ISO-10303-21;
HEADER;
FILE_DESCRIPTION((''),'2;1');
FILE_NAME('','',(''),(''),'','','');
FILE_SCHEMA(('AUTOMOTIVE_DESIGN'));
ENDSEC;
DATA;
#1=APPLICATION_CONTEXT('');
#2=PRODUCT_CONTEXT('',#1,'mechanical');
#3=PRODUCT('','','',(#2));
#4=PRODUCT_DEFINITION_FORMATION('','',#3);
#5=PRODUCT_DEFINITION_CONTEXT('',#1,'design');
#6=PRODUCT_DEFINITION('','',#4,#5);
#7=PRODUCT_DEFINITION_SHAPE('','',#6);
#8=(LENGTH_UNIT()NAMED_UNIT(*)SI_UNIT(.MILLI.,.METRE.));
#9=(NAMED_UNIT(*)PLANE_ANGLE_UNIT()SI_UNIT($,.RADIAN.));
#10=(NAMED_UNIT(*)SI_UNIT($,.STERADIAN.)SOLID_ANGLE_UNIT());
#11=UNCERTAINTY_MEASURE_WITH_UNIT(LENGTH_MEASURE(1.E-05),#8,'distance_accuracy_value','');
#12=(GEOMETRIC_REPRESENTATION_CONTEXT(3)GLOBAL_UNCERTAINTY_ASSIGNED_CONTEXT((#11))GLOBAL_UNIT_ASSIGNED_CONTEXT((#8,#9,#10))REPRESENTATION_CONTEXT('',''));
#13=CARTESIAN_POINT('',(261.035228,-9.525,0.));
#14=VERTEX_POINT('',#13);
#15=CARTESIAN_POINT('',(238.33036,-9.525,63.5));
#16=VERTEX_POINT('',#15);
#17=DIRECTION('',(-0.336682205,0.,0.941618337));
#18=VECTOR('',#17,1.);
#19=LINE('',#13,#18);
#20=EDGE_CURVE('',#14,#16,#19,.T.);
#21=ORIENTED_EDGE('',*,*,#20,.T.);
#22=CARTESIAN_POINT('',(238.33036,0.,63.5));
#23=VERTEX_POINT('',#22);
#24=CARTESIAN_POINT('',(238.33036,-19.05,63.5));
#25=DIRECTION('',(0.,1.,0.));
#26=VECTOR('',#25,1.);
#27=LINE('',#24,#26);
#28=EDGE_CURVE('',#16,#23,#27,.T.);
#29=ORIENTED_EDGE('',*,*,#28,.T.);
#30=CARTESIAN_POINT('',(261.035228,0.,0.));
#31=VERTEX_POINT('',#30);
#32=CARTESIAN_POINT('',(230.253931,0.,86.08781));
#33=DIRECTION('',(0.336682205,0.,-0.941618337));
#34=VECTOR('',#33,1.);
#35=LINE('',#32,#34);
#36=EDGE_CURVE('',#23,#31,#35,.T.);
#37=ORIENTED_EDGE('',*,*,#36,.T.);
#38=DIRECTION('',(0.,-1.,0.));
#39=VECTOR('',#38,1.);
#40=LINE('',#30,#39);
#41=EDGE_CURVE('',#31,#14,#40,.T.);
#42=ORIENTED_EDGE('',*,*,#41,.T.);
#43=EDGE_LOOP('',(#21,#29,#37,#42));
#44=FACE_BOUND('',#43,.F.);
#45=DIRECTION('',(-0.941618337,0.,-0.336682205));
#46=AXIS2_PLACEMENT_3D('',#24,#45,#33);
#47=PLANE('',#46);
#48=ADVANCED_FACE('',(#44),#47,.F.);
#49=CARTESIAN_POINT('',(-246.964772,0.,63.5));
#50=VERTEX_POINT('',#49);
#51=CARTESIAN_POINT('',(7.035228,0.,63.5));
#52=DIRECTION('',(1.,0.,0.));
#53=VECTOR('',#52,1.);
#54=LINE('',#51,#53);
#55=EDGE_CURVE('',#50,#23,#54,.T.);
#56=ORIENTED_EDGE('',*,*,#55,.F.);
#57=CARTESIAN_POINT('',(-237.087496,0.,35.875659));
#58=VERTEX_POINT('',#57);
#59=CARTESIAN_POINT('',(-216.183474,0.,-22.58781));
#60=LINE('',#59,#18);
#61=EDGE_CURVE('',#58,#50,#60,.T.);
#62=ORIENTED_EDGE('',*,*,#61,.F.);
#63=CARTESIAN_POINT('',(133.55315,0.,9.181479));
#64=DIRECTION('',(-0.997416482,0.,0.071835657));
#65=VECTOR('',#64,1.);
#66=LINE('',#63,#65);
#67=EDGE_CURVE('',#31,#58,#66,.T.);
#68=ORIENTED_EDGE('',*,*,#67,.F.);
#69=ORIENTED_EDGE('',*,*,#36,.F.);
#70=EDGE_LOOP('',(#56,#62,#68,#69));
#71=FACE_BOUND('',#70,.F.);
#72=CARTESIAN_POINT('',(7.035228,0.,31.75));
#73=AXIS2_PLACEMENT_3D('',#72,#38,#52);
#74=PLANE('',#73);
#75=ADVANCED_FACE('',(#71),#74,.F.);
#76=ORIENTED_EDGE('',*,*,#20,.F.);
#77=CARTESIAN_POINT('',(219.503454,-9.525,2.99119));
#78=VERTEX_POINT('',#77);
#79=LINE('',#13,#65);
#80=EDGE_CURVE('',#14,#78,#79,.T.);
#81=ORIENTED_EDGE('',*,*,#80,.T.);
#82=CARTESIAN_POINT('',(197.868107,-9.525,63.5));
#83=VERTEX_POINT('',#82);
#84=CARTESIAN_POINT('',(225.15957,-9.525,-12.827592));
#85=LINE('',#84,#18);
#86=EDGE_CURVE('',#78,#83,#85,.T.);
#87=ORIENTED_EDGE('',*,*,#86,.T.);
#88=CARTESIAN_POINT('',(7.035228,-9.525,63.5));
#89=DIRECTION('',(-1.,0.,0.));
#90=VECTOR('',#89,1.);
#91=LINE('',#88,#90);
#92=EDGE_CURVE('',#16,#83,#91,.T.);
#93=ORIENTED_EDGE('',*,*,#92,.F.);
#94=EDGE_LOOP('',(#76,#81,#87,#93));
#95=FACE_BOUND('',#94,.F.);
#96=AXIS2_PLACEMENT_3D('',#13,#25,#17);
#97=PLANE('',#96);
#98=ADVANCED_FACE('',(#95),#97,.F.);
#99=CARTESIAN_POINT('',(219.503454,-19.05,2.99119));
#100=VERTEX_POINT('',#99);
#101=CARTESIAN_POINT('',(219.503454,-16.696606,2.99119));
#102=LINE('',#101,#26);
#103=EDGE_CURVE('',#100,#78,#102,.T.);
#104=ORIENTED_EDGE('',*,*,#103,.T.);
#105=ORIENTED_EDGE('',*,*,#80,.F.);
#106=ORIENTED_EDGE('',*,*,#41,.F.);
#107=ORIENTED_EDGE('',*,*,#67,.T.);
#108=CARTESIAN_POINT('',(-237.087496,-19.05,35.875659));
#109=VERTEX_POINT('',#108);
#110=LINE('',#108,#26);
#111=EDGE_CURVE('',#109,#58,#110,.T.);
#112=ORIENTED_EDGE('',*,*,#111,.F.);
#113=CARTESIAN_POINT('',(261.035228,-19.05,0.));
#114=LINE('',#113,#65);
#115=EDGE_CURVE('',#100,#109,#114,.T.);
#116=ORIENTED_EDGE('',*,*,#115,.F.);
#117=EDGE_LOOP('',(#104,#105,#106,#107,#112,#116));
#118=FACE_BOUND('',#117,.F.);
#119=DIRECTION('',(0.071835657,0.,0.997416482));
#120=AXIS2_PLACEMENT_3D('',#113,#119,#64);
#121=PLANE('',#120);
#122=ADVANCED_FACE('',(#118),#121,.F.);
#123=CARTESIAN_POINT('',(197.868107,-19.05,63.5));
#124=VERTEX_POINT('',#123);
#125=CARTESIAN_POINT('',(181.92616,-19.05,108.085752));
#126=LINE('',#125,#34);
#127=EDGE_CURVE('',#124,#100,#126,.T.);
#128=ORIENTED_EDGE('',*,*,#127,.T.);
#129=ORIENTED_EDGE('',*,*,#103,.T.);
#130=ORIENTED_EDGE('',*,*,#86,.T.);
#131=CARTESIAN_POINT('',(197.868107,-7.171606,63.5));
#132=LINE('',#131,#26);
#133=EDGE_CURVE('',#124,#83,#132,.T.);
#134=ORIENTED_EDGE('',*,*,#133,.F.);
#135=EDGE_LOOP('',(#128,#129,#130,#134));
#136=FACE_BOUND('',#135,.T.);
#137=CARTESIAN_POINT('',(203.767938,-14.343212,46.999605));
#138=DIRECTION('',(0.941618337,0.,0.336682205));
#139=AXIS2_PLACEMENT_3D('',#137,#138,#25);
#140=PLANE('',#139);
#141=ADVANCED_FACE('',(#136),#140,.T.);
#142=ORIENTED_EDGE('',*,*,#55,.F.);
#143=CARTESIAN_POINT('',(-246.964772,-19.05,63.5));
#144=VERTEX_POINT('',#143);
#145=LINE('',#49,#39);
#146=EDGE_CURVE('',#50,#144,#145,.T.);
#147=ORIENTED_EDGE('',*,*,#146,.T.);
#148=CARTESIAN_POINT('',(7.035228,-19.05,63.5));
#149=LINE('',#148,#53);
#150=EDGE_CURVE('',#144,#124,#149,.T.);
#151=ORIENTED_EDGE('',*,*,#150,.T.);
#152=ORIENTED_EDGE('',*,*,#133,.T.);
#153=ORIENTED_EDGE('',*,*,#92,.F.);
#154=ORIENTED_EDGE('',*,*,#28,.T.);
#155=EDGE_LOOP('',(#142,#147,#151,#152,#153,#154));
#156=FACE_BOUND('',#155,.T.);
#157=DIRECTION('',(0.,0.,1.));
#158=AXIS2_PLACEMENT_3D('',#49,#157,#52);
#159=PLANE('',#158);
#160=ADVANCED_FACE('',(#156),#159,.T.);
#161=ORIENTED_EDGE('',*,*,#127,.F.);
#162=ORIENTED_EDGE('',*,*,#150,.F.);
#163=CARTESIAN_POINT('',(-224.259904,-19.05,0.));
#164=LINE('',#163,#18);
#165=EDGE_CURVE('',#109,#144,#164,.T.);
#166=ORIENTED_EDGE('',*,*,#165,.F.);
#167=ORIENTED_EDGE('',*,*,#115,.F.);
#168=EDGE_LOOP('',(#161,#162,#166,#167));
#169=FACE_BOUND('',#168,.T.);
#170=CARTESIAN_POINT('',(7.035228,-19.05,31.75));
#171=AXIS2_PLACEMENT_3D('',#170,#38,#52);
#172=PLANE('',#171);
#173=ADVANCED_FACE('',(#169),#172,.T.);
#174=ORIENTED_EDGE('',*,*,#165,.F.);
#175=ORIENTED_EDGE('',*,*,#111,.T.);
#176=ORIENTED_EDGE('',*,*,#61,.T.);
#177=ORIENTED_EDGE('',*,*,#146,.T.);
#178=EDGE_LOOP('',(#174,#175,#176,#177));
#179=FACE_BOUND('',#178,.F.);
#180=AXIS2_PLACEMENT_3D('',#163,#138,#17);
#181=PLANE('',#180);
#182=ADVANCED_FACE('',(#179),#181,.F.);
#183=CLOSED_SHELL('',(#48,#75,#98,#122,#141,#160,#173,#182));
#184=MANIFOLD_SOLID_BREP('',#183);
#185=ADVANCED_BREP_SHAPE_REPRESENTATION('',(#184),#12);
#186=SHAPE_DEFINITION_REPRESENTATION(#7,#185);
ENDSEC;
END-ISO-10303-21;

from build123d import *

# Parameters (mm, degrees)
F0_W     = 508
F0_H     = 63.5
F1_DEPTH = 19.05
F3_DEPTH = 50.8
F5_DEPTH = 50.8
F7_DEPTH = 38.1
F9_DEPTH = 38.1


with BuildPart() as f1:
    # F0 (on Front) → F1 (new body)
    with BuildSketch(Plane.XZ):
        with Locations((7.0352284261, 31.75)):
            Rectangle(F0_W, F0_H)
    extrude(amount=F1_DEPTH)

    # F2 (on face) → F3 (cut)
    with BuildSketch(Plane.XZ.offset(19.05)):
        Polygon((-224.2599035735, 0), (-246.9647715739, 63.5), (-246.9647715739, 0), align=None)
    extrude(amount=-F3_DEPTH, mode=Mode.SUBTRACT)

    # F4 (on face) → F5 (cut)
    with BuildSketch(Plane.XZ.offset(19.05)):
        Polygon((261.0352284261, 0), (-237.0874956021, 35.8756586385), (-224.2599035735, 0), align=None)
    extrude(amount=-F5_DEPTH, mode=Mode.SUBTRACT)

    # F6 (on face) → F7 (cut)
    with BuildSketch(Plane.XZ.offset(19.05)):
        Polygon((238.3303604257, 63.5), (261.0352284261, 0), (261.0352284261, 63.5), align=None)
    extrude(amount=-F7_DEPTH, mode=Mode.SUBTRACT)

    # F8 (on face) → F9 (cut)
    with BuildSketch(Plane(origin=(231.445604258, 0, 82.7549904558), x_dir=(0, 1, 0), z_dir=(0.941618337, 0, 0.3366822055))):
        Polygon((-19.05, 40.5242251848), (-19.05, -87.885916413), (-9.525, -87.885916413), (-9.525, 37.3283624649), align=None)
    extrude(amount=-F9_DEPTH, mode=Mode.SUBTRACT)


solid = f1.part
